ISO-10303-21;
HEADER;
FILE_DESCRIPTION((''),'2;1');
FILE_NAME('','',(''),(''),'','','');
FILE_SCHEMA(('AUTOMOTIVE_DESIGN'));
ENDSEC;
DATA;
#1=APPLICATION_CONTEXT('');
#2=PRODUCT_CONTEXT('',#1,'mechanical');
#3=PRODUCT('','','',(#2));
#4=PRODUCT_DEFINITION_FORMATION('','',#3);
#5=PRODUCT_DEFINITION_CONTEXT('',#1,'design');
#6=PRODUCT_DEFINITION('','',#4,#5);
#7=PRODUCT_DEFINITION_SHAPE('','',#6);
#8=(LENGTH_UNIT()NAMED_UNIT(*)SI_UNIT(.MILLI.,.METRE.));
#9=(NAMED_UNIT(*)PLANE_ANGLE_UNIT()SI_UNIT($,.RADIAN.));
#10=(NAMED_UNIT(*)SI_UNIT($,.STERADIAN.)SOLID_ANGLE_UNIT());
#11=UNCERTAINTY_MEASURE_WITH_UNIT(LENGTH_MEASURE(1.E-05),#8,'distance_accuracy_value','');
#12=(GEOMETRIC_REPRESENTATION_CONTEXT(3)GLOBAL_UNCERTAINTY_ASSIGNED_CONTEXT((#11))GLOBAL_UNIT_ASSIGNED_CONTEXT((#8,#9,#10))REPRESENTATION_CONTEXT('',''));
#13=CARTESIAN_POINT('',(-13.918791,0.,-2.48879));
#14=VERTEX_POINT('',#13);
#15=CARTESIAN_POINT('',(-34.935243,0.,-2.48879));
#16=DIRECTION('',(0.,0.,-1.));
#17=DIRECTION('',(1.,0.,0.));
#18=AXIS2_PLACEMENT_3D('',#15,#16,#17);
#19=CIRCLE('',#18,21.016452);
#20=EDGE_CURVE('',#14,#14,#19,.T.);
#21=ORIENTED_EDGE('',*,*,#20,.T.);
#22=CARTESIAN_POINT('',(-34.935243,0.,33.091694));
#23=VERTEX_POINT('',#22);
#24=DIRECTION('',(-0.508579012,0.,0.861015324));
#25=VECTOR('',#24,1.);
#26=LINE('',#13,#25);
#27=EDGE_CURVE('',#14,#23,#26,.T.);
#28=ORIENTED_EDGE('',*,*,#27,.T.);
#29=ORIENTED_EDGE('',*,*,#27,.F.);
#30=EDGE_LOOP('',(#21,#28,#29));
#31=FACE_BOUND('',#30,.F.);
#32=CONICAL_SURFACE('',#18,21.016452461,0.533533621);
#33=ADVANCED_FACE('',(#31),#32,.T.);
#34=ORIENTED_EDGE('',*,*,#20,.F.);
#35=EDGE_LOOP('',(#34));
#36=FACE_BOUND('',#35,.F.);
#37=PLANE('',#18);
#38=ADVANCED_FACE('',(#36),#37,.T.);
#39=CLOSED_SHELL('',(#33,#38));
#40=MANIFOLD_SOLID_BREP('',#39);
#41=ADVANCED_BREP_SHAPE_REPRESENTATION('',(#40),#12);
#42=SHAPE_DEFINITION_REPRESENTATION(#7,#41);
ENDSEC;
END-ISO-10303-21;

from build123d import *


# Not quite as in the source:
# - the program builds the solid bodies; features that only make, move or delete a surface that nothing else refers to are left out


with BuildPart() as f1:
    # F0 (on Front) → F1 (revolve)
    with BuildSketch(Plane.XZ):
        Polygon((-13.9187909663, -2.4887903128), (-34.9352434278, 33.0916941166), (-34.9352434278, -2.4887903128), align=None)
    revolve(axis=Axis((-34.9352434278, 0, 15.3014519019), (0, 0, -1)))


solid = f1.part
